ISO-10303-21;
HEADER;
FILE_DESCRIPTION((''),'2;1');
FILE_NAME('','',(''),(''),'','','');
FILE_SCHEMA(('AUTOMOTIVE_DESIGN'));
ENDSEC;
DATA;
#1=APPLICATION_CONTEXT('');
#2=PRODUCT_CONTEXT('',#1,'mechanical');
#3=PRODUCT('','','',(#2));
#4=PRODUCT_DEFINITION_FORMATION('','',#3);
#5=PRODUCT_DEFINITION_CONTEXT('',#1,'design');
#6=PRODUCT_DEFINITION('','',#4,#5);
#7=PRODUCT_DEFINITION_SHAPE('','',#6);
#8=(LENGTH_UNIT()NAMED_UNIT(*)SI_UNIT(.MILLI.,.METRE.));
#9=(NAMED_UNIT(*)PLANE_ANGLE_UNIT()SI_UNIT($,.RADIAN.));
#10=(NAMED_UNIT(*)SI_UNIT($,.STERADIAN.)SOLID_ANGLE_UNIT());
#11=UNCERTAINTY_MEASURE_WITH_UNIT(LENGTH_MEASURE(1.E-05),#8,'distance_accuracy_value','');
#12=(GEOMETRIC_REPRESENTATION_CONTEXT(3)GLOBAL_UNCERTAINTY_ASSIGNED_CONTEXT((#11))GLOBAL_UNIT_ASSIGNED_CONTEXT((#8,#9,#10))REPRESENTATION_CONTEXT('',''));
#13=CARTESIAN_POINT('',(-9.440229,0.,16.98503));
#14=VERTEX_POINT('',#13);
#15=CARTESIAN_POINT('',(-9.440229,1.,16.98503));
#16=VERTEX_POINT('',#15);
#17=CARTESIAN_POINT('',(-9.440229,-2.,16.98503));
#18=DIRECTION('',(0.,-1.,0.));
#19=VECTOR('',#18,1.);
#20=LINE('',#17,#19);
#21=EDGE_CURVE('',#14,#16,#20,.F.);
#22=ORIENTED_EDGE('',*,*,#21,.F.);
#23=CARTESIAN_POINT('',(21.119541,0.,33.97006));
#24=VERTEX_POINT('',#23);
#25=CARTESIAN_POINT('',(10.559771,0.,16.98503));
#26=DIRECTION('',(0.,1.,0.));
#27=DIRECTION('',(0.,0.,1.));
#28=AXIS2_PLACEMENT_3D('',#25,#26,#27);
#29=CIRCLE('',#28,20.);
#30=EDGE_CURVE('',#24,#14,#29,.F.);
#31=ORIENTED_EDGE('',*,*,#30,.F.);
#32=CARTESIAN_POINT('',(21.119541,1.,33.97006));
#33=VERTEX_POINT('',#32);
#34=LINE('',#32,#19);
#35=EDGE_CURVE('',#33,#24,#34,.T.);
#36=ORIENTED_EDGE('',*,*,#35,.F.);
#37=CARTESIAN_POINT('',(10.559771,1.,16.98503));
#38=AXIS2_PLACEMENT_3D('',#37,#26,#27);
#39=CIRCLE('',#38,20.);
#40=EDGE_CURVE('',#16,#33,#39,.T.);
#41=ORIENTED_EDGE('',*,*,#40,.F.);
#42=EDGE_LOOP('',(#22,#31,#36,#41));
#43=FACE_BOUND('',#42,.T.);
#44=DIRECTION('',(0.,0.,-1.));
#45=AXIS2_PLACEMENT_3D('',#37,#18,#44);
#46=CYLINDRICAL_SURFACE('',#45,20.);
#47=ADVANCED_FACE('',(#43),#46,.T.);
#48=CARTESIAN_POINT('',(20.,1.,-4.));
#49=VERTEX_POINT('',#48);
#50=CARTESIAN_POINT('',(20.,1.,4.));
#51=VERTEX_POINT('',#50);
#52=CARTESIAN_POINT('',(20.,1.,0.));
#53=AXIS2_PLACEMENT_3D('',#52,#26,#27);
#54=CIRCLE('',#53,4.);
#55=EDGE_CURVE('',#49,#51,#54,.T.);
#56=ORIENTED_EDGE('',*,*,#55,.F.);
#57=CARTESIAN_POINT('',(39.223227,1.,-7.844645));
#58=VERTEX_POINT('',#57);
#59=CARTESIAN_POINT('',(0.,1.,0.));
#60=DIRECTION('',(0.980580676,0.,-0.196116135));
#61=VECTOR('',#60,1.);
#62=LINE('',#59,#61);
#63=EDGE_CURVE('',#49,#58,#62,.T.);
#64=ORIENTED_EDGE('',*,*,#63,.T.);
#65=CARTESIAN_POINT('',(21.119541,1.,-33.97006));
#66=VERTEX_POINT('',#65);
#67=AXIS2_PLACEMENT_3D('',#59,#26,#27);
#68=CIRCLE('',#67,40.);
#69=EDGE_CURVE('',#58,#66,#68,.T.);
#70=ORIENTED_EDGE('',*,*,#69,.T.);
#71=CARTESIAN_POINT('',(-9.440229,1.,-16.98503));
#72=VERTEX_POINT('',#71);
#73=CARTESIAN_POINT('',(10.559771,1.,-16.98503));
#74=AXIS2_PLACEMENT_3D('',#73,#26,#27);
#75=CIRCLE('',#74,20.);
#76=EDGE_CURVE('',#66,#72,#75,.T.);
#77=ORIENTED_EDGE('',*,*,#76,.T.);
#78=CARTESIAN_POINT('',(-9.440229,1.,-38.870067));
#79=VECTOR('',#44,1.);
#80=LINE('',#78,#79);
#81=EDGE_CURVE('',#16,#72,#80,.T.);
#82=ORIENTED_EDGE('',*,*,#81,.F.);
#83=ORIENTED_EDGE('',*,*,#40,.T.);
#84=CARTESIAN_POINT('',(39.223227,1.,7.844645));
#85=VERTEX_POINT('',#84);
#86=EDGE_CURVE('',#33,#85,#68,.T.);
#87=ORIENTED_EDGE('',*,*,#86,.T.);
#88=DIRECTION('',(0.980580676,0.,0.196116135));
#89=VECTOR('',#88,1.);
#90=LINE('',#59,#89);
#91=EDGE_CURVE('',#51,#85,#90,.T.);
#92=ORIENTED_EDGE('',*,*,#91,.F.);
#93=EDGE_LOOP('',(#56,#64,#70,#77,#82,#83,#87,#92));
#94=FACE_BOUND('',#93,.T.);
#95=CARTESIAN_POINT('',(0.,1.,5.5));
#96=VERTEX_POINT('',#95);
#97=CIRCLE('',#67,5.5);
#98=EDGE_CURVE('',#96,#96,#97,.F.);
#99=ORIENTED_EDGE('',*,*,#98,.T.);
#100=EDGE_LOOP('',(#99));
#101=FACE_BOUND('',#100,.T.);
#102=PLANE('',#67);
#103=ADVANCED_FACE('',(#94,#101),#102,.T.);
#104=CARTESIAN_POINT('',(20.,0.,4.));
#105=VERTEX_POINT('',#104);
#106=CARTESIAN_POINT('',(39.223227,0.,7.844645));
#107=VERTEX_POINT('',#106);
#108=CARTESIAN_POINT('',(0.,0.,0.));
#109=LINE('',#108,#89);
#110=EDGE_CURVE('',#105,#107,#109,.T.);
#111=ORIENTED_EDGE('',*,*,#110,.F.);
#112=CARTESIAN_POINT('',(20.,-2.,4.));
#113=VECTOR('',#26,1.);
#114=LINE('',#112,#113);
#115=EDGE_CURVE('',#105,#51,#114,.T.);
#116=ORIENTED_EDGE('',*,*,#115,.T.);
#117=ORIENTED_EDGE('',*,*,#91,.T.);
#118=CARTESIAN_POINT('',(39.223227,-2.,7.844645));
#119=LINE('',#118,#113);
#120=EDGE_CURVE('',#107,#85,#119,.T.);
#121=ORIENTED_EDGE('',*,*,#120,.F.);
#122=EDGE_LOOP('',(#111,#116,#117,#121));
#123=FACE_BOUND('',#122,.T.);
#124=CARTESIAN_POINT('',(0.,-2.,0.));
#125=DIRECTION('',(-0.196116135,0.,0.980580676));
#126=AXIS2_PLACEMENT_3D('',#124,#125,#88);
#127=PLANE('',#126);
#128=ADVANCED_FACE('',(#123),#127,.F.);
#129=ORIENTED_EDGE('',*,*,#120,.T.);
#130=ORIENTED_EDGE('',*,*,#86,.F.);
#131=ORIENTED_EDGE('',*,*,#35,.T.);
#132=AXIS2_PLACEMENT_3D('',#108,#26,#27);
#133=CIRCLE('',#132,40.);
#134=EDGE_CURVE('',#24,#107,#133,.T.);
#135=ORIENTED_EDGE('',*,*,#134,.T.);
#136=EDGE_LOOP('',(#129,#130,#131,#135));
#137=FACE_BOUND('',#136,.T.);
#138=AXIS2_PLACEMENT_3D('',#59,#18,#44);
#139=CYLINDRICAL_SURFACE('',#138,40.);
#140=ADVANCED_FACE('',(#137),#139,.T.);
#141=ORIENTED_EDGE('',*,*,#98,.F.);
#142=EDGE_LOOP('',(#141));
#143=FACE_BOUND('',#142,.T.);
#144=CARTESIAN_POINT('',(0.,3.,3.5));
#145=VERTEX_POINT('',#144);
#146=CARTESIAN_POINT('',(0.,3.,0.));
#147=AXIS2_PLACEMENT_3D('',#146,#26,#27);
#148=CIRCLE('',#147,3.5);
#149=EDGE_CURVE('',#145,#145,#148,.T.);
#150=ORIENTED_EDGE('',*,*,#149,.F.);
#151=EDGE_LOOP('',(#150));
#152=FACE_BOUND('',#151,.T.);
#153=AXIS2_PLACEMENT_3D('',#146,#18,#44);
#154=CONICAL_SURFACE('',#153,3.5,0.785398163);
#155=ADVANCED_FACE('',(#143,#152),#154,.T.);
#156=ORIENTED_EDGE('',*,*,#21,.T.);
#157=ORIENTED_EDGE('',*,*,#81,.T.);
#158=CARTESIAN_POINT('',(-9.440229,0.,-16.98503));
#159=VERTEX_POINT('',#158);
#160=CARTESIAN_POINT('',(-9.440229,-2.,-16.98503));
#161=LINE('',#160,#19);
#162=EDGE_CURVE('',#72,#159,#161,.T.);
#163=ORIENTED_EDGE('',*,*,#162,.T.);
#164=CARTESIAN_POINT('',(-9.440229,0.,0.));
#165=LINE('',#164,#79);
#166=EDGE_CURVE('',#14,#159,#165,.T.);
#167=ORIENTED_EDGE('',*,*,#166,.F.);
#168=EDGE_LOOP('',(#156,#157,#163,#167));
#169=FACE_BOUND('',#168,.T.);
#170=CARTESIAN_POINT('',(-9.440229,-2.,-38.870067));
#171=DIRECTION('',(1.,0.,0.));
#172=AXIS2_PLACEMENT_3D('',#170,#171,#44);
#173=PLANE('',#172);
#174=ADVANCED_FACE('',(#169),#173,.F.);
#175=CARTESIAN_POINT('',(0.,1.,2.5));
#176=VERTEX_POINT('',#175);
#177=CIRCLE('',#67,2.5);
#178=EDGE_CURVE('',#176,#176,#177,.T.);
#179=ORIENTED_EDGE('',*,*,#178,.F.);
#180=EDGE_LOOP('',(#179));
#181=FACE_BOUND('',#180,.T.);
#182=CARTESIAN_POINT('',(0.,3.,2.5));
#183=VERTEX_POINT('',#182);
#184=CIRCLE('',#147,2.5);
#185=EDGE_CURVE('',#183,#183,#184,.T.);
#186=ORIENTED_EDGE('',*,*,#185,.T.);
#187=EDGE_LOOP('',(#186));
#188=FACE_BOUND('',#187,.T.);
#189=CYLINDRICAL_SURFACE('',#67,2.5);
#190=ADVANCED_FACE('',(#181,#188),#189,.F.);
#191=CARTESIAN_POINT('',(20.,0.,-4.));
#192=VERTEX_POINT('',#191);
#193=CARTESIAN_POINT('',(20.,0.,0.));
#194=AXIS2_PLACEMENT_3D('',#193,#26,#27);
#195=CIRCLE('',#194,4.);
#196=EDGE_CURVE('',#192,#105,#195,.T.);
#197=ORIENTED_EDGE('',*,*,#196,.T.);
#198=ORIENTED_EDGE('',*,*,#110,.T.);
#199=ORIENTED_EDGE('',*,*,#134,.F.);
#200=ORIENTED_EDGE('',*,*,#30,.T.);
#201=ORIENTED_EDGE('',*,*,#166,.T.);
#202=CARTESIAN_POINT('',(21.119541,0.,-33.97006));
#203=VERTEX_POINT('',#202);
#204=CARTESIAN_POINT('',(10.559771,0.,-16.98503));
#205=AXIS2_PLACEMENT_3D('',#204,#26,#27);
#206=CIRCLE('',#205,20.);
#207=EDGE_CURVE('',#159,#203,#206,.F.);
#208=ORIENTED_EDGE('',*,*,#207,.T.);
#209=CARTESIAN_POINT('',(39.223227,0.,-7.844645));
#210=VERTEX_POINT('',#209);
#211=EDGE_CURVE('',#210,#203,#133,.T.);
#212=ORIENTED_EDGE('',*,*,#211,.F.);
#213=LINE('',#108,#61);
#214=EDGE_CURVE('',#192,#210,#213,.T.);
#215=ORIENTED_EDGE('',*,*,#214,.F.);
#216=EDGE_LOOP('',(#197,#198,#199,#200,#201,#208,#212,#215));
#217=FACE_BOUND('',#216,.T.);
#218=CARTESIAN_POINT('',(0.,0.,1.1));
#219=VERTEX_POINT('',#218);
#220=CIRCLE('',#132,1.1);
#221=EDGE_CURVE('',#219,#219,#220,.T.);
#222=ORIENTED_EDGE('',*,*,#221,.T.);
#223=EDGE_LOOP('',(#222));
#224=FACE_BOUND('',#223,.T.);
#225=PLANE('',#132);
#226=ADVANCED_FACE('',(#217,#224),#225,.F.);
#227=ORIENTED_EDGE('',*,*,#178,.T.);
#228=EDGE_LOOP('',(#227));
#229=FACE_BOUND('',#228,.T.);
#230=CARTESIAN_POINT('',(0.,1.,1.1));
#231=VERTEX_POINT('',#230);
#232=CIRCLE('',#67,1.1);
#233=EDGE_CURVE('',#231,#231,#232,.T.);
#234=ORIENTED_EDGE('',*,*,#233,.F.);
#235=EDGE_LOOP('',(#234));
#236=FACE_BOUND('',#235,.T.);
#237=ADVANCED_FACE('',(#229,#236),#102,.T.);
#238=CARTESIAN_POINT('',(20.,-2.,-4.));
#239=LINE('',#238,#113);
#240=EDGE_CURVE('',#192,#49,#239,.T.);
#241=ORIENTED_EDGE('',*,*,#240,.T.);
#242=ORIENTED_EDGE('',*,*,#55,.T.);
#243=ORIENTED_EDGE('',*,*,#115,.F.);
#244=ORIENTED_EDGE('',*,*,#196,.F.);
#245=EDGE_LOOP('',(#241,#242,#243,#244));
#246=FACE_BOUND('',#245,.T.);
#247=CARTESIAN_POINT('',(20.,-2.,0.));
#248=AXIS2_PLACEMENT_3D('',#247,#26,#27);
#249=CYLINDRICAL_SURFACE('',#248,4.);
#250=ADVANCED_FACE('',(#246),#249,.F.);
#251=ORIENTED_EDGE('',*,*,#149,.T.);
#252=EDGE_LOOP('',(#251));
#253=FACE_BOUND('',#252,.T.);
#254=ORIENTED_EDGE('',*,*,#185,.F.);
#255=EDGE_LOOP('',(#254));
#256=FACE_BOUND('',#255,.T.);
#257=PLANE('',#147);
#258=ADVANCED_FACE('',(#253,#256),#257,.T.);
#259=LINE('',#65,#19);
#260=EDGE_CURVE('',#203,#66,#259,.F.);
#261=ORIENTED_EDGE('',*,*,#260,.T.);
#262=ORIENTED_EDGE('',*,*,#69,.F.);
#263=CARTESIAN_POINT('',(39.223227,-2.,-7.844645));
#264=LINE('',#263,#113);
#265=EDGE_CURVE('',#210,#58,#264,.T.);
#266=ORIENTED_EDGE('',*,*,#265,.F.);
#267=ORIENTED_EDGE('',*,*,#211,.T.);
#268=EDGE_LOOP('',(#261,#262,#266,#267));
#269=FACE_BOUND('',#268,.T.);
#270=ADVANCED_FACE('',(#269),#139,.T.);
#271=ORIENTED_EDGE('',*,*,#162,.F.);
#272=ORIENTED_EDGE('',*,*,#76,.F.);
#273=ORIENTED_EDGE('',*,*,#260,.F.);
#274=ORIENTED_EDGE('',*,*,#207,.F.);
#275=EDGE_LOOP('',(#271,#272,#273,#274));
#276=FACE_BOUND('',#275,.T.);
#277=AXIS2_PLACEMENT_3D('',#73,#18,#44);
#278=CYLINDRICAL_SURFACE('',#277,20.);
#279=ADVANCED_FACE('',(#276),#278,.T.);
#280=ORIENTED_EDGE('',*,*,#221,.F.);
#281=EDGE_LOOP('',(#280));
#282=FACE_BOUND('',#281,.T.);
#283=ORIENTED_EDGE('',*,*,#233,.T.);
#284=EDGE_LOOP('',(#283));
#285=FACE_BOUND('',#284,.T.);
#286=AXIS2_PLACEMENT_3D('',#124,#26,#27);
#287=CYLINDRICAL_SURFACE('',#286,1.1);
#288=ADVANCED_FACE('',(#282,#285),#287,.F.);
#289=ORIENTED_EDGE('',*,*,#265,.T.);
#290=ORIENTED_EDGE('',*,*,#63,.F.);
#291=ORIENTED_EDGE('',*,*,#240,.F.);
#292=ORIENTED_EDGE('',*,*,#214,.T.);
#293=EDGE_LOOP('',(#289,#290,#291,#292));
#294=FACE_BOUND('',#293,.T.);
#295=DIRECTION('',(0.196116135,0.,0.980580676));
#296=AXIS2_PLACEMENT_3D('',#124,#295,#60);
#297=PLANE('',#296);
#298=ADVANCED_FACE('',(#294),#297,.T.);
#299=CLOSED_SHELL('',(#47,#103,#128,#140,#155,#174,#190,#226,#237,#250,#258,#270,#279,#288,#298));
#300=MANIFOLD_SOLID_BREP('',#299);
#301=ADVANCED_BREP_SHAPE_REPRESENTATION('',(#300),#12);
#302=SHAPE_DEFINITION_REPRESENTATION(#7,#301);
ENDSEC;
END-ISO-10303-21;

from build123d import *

# Parameters (mm, degrees)
ESBO_O1_R                = 40
RESSALTO_EXTRUS_O1_DEPTH = 1
ESBO_O3_R                = 3.5
RESSALTO_EXTRUS_O2_DEPTH = 2
ESBO_O4_R                = 2.5
CORTE_EXTRUS_O2_DEPTH    = 2
CHANFRO1_SIZE            = 2
ESBO_O6_R                = 1.1
CORTE_EXTRUS_O4_DEPTH    = 3
CORTE_EXTRUS_O5_START    = -3
CORTE_EXTRUS_O5_DEPTH    = 3
ESBO_O7_W                = 38.307647293
ESBO_O7_H                = 77.740133008
CORTE_EXTRUS_O6_DEPTH    = 3
FILETE1_R                = 20
FILETE2_R                = 20


with BuildPart() as part:
    # Esboço1 → Ressalto-extrusão1 (new body)
    with BuildSketch(Plane(origin=(0, 0, 0), x_dir=(1, 0, 0), z_dir=(0, 1, 0))):
        with Locations(Location((0, 0, 0), (0, 0, 270))):
            Circle(ESBO_O1_R)
    extrude(amount=RESSALTO_EXTRUS_O1_DEPTH)

    # Esboço3 → Ressalto-extrusão2 (add)
    with BuildSketch(Plane(origin=(0, 1, 0), x_dir=(1, 0, 0), z_dir=(0, 1, 0))):
        with Locations(Location((0, 0, 0), (0, 0, 270))):
            Circle(ESBO_O3_R)
    extrude(amount=RESSALTO_EXTRUS_O2_DEPTH)

    # Esboço4 → Corte-extrusão2 (cut)
    with BuildSketch(Plane(origin=(0, 3, 0), x_dir=(1, 0, 0), z_dir=(0, 1, 0))):
        with Locations(Location((0, 0, 0), (0, 0, 270))):
            Circle(ESBO_O4_R)
    extrude(amount=-CORTE_EXTRUS_O2_DEPTH, mode=Mode.SUBTRACT)

    # Chanfro1
    chanfro1_edges = [part.edges().sort_by_distance(p)[0] for p in [
        (0, 1, -3.5),
    ]]
    chamfer(chanfro1_edges, length=CHANFRO1_SIZE - 0.0001)  # a hair under: the kernel refuses the full size

    # Esboço6 → Corte-extrusão4 (cut)
    with BuildSketch(Plane(origin=(0, 1, 0), x_dir=(1, 0, 0), z_dir=(0, 1, 0))):
        with Locations(Location((0, 0, 0), (0, 0, 270))):
            Circle(ESBO_O6_R)
    extrude(amount=-CORTE_EXTRUS_O4_DEPTH, mode=Mode.SUBTRACT)

    # Esboço2 → Corte-extrusão5 (cut)
    with BuildSketch(Plane(origin=(0, 1, 0), x_dir=(1, 0, 0), z_dir=(0, 1, 0)).offset(CORTE_EXTRUS_O5_START)):
        with BuildLine():
            ThreePointArc((20, 4), (16, 0), (20, -4))
            Line((20, -4), (39.223227028, -7.844645406))
            ThreePointArc((39.223227028, -7.844645406), (40, 0), (39.223227028, 7.844645406))
            Line((39.223227028, 7.844645406), (20, 4))
        make_face()
    extrude(amount=CORTE_EXTRUS_O5_DEPTH, mode=Mode.SUBTRACT)

    # Esboço7 → Corte-extrusão6 (cut)
    with BuildSketch(Plane(origin=(0, 1, 0), x_dir=(1, 0, 0), z_dir=(0, 1, 0))):
        with Locations((-28.594052983, 0)):
            Rectangle(ESBO_O7_W, ESBO_O7_H)
    extrude(amount=-CORTE_EXTRUS_O6_DEPTH, mode=Mode.SUBTRACT)

    # Filete1
    filete1_edges = [part.edges().sort_by_distance(p)[0] for p in [
        (-9.440229337, 0.5, -38.870066504),
    ]]
    fillet(filete1_edges, radius=FILETE1_R)

    # Filete2
    filete2_edges = [part.edges().sort_by_distance(p)[0] for p in [
        (-9.440229337, 0.5, 38.870066504),
    ]]
    fillet(filete2_edges, radius=FILETE2_R)


solid = part.part
